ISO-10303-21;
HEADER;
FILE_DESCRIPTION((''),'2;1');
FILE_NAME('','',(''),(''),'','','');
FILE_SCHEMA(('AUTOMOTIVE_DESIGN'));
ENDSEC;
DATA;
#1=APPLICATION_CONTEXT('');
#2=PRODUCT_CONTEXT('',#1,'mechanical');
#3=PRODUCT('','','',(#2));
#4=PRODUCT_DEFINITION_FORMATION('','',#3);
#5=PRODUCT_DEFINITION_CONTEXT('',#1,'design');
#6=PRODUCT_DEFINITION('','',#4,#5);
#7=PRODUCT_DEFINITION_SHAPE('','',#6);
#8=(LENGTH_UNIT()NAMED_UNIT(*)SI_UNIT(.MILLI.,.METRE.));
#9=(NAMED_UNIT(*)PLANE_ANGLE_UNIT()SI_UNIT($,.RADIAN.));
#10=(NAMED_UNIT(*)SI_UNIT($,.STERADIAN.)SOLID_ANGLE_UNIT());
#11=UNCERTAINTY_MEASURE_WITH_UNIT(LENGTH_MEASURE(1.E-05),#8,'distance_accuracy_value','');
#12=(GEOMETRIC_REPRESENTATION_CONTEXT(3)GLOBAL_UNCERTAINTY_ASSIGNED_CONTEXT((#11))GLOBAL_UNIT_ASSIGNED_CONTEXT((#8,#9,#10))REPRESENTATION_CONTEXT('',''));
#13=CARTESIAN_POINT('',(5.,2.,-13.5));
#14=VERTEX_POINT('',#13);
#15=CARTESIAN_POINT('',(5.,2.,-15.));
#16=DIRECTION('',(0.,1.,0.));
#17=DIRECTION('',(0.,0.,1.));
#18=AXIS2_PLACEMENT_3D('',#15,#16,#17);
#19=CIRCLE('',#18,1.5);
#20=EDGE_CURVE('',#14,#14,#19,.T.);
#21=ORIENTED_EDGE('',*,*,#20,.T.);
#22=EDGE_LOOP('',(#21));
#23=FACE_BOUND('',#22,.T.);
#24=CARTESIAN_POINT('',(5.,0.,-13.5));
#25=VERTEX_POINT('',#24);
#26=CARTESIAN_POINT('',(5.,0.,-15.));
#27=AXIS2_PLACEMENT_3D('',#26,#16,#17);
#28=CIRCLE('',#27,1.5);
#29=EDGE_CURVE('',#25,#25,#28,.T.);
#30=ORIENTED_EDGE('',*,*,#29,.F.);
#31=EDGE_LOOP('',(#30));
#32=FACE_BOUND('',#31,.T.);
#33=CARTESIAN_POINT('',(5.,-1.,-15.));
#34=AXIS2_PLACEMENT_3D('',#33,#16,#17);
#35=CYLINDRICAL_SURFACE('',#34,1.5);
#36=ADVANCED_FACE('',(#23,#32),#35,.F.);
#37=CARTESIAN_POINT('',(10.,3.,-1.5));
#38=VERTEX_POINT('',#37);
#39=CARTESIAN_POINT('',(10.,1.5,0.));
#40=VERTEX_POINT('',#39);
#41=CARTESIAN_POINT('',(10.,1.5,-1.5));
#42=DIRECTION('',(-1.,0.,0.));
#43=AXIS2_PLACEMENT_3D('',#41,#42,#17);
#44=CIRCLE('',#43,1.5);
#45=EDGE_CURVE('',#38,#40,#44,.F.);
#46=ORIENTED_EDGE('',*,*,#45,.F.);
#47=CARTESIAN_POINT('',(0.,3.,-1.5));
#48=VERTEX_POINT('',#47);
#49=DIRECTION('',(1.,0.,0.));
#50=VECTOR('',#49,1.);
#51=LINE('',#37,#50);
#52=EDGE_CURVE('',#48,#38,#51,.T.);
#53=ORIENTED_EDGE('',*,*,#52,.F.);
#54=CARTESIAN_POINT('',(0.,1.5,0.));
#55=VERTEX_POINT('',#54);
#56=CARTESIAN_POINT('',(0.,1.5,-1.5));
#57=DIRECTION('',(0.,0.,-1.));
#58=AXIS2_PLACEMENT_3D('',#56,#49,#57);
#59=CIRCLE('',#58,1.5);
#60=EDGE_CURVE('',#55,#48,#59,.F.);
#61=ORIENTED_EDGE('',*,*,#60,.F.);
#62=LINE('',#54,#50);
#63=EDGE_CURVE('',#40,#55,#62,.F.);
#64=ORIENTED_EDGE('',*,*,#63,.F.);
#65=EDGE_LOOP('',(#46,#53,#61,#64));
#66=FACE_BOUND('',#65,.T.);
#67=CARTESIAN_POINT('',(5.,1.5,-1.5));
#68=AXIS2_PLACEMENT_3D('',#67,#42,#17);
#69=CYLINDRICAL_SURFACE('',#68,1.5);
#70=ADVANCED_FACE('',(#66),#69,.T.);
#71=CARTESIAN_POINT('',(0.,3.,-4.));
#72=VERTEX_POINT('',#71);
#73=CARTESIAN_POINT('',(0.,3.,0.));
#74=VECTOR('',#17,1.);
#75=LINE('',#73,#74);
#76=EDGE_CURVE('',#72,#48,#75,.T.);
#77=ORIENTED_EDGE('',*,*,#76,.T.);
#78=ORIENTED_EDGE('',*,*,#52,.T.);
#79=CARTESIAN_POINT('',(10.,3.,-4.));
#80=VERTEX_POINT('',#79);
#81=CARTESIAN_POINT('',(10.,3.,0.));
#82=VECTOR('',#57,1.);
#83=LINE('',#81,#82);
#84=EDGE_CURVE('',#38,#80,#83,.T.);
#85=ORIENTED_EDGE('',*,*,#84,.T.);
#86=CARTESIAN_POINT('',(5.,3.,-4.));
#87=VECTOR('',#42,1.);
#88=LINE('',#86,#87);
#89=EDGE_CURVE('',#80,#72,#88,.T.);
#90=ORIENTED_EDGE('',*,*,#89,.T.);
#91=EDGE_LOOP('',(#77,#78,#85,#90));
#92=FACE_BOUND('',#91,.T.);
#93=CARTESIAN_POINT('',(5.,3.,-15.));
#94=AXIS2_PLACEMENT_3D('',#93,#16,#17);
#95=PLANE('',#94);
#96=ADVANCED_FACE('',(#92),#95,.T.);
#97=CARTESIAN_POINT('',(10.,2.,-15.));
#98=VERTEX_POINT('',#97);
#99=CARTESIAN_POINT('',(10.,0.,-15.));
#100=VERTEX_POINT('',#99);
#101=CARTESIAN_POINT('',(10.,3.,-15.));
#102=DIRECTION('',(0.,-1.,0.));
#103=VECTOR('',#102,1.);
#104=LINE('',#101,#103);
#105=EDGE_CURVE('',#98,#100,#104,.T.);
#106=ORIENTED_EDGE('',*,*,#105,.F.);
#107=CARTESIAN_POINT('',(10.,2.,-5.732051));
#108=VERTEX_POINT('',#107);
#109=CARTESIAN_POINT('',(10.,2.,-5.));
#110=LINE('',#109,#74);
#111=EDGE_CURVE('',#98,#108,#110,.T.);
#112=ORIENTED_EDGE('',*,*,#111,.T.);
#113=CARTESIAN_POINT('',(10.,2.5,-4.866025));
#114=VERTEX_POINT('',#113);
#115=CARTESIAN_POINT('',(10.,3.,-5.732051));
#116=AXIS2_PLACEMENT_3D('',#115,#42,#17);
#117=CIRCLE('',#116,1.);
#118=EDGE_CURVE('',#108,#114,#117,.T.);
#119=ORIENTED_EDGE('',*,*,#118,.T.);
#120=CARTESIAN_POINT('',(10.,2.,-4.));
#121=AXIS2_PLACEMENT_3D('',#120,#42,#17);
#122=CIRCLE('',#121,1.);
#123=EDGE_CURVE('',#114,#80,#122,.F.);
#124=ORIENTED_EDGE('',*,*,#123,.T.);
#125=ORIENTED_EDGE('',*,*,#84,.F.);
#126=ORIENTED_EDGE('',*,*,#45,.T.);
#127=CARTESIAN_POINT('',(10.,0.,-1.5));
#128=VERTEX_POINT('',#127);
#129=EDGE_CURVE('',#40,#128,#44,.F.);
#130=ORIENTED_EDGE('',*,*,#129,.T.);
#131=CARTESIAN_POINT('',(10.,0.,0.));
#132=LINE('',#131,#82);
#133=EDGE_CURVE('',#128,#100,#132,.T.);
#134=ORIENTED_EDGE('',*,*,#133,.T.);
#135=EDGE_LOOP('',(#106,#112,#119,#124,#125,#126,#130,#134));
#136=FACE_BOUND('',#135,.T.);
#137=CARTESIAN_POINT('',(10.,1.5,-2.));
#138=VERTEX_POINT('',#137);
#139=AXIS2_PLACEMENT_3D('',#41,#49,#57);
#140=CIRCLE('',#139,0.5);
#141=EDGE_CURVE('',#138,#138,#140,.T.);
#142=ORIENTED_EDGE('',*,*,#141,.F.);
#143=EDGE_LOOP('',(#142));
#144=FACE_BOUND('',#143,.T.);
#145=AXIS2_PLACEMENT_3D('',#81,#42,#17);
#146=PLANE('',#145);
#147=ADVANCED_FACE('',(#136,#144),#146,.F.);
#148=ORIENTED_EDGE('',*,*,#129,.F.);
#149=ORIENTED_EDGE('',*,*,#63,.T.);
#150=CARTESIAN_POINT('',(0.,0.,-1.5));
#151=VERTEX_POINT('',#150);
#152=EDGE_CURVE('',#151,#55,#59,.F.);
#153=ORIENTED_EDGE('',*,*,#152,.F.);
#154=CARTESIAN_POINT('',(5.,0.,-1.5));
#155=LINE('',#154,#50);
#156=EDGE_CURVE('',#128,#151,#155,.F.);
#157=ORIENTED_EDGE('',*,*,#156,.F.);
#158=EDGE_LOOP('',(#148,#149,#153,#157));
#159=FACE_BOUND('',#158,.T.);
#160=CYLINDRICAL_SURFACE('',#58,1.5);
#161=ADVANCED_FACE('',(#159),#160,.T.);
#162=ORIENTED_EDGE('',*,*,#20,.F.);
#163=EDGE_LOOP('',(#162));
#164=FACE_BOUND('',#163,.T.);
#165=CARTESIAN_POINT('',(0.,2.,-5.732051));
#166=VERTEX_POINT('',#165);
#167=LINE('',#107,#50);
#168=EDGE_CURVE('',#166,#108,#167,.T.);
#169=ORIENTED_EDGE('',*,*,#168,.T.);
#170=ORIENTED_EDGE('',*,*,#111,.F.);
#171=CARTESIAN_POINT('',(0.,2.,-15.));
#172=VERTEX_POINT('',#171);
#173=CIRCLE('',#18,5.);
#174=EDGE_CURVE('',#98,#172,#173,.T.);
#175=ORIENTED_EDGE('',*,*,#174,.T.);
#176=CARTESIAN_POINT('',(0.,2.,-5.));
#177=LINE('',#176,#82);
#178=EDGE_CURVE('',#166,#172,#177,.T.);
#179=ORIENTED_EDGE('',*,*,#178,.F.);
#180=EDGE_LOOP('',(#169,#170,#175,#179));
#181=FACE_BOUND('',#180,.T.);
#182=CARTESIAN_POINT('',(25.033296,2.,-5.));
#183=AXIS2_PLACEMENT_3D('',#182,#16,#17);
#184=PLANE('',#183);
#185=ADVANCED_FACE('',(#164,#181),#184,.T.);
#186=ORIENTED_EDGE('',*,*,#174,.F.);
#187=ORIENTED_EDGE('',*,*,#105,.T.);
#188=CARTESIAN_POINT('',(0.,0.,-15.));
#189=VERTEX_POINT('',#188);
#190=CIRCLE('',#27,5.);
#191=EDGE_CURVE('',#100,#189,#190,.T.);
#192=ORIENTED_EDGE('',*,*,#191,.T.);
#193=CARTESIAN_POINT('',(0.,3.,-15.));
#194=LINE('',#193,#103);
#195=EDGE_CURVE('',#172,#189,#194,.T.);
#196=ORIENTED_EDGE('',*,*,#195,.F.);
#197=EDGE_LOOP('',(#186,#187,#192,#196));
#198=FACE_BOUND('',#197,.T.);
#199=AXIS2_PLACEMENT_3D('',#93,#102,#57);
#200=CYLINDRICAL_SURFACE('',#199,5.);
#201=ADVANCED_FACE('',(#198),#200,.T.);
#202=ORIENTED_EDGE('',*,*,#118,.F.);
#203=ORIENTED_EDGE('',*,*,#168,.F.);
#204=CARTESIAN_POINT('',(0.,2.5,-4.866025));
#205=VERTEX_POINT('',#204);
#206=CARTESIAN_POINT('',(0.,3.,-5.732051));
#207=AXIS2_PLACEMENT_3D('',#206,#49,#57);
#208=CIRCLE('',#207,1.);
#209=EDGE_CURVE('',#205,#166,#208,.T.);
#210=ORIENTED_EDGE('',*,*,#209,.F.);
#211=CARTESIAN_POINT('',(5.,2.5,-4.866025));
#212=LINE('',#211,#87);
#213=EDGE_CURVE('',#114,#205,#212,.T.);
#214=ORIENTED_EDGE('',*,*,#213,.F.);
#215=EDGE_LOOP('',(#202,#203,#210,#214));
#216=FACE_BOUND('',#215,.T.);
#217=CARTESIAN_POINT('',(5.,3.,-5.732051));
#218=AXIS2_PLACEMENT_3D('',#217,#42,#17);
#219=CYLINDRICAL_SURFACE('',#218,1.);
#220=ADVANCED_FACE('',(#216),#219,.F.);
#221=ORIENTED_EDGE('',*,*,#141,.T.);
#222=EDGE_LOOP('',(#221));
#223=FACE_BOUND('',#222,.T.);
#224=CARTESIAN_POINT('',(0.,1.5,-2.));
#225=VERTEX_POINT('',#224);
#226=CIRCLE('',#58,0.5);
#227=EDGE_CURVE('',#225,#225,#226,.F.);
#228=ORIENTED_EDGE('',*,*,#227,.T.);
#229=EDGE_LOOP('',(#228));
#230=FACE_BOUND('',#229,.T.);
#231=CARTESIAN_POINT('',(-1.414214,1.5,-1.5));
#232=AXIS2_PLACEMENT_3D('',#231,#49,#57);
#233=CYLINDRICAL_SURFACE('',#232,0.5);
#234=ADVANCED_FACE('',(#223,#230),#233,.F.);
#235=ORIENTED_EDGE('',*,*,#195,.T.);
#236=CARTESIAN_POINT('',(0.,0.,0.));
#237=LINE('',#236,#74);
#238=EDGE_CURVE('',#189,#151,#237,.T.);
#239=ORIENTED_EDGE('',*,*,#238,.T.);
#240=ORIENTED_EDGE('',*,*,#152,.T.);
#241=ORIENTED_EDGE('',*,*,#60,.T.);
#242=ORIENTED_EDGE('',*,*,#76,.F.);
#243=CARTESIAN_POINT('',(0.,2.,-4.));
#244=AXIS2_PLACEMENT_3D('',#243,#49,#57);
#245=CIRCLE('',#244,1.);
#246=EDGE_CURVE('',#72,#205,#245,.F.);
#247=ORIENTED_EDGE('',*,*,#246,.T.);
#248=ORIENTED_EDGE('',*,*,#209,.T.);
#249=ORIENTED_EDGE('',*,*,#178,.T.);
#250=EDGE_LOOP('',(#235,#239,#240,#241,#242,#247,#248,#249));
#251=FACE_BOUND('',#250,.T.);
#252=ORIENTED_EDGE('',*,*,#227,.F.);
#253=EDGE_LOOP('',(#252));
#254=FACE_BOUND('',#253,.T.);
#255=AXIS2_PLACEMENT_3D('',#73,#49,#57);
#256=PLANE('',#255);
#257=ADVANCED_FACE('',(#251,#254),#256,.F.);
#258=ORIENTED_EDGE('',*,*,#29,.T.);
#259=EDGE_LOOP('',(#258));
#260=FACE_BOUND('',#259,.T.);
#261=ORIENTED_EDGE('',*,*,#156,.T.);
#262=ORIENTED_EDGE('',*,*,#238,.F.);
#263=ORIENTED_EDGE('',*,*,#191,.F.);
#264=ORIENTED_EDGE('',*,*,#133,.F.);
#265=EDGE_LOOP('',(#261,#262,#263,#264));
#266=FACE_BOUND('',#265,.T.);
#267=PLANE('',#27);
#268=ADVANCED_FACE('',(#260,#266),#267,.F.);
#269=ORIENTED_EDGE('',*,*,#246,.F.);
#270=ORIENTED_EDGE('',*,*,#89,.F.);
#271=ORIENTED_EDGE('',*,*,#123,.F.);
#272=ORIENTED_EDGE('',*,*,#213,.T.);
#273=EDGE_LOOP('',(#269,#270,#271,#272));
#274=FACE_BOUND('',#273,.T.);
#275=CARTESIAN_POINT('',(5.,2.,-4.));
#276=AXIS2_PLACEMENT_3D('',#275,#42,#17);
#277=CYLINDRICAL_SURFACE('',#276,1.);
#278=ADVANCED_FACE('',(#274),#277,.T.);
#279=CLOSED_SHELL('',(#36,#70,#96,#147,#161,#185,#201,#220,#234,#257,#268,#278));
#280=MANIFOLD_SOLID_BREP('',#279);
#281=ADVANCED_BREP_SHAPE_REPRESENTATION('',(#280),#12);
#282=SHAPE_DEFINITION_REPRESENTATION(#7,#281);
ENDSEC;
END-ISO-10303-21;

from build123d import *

# Parameters (mm, degrees)
SALIENTE_EXTRUIR1_DEPTH = 3
CROQUIS3_W              = 15
CROQUIS3_H              = 1
CORTAR_EXTRUIR1_DEPTH   = 10
REDONDEO1_R             = 1
REDONDEO3_R             = 1
CROQUIS4_R              = 0.5
CORTAR_EXTRUIR2_DEPTH   = 10
REDONDEO4_R             = 1.5
REDONDEO5_R             = 1.5
CROQUIS5_R              = 1.5
CORTAR_EXTRUIR3_DEPTH   = 3


with BuildPart() as part:
    # Croquis1 → Saliente-Extruir1 (new body)
    with BuildSketch(Plane(origin=(0, 0, 0), x_dir=(1, 0, 0), z_dir=(0, 1, 0))):
        with BuildLine():
            Line((0, 0), (10, 0))
            Line((10, 0), (10, 15))
            ThreePointArc((10, 15), (5, 20), (0, 15))
            Line((0, 15), (0, 0))
        make_face()
    extrude(amount=SALIENTE_EXTRUIR1_DEPTH)

    # Croquis3 → Cortar-Extruir1 (cut)
    with BuildSketch(Plane(origin=(0, 0, 0), x_dir=(0, 0, -1), z_dir=(1, 0, 0))):
        with Locations((12.5, 2.5)):
            Rectangle(CROQUIS3_W, CROQUIS3_H)
    extrude(amount=CORTAR_EXTRUIR1_DEPTH, mode=Mode.SUBTRACT)

    # Redondeo1
    redondeo1_edges = [part.edges().sort_by_distance(p)[0] for p in [
        (5, 3, -5),
    ]]
    fillet(redondeo1_edges, radius=REDONDEO1_R - 0.0001)  # a hair under: the kernel refuses the full size

    # Redondeo3
    redondeo3_edges = [part.edges().sort_by_distance(p)[0] for p in [
        (5, 2, -5),
    ]]
    fillet(redondeo3_edges, radius=REDONDEO3_R)

    # Croquis4 → Cortar-Extruir2 (cut)
    with BuildSketch(Plane(origin=(10, 0, 0), x_dir=(0, 0, -1), z_dir=(1, 0, 0))):
        with Locations((1.5, 1.5)):
            Circle(CROQUIS4_R)
    extrude(amount=-CORTAR_EXTRUIR2_DEPTH, mode=Mode.SUBTRACT)

    # Redondeo4
    redondeo4_edges = [part.edges().sort_by_distance(p)[0] for p in [
        (5, 3, 0),
    ]]
    fillet(redondeo4_edges, radius=REDONDEO4_R)

    # Redondeo5
    redondeo5_edges = [part.edges().sort_by_distance(p)[0] for p in [
        (5, 0, 0),
    ]]
    fillet(redondeo5_edges, radius=REDONDEO5_R - 0.0001)  # a hair under: the kernel refuses the full size

    # Croquis5 → Cortar-Extruir3 (cut)
    with BuildSketch(Plane(origin=(0, 2, 0), x_dir=(1, 0, 0), z_dir=(0, 1, 0))):
        with Locations(Location((5, 15, 0), (0, 0, 270))):
            Circle(CROQUIS5_R)
    extrude(amount=-CORTAR_EXTRUIR3_DEPTH, mode=Mode.SUBTRACT)


solid = part.part
